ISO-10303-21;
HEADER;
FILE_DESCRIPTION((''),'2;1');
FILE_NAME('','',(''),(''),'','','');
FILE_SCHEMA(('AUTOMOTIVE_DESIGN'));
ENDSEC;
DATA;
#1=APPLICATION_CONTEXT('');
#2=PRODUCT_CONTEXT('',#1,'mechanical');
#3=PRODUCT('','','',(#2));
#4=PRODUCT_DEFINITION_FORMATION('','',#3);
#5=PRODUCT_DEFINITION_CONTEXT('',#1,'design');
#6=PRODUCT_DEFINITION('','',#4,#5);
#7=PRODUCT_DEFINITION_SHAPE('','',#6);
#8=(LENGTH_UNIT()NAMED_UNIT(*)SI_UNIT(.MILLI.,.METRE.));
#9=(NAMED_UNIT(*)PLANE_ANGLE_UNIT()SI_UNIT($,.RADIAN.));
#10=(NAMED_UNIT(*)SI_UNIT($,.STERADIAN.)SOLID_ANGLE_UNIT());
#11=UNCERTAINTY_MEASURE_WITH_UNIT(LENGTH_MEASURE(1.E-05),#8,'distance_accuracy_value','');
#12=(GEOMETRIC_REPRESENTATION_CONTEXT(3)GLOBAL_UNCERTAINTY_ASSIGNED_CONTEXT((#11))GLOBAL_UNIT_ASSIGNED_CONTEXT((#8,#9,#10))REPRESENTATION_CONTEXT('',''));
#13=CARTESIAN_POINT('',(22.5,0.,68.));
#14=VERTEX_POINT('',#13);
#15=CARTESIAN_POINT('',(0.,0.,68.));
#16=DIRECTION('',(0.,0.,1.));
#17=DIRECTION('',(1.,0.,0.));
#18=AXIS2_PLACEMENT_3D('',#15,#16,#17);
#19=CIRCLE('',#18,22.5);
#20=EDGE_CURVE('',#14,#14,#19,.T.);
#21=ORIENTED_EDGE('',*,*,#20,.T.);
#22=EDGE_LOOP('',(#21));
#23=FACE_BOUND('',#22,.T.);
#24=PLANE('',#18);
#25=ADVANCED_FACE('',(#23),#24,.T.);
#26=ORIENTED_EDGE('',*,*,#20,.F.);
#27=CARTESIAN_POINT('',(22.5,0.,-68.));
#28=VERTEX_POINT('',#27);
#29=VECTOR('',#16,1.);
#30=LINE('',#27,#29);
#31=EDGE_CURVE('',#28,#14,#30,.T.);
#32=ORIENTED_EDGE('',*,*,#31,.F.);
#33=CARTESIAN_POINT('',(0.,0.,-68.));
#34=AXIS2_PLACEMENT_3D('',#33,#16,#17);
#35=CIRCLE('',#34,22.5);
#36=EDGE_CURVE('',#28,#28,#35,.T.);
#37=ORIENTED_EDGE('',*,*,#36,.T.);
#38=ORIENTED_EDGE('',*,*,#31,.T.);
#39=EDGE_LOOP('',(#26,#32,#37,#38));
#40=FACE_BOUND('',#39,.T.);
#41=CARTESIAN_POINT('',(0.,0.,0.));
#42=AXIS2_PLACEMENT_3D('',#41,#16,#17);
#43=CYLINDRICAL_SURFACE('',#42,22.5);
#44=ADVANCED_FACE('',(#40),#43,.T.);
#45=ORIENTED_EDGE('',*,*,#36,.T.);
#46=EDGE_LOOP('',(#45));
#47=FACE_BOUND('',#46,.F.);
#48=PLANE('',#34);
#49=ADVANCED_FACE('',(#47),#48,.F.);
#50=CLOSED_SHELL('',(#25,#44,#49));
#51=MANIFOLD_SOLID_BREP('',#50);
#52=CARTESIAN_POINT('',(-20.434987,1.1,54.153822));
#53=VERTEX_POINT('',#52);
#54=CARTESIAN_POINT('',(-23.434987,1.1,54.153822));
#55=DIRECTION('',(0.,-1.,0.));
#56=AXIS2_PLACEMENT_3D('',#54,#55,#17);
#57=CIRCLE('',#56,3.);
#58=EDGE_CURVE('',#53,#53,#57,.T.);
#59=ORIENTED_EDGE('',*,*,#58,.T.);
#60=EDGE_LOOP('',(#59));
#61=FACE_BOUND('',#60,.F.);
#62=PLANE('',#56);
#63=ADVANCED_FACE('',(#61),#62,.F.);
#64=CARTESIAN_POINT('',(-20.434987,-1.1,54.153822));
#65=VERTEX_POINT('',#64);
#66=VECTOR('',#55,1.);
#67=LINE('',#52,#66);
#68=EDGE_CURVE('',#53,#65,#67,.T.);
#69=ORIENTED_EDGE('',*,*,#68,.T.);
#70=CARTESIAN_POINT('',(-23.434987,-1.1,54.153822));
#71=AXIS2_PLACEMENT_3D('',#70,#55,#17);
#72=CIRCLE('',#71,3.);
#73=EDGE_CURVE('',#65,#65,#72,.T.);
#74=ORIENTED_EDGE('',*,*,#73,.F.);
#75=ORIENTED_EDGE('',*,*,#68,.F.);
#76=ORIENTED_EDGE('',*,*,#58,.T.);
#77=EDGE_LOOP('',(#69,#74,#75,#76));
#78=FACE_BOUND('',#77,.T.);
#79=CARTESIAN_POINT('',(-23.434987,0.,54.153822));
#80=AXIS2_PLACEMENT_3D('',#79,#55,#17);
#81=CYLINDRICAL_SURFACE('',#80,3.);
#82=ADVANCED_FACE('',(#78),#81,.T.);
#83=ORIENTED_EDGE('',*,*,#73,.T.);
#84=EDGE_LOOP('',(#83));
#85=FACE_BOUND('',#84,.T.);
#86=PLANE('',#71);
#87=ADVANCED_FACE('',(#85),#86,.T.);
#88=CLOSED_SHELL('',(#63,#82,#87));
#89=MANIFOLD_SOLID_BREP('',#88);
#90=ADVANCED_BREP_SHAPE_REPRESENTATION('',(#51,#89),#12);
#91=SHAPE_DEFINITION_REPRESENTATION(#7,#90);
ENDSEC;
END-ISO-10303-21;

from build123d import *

# Parameters (mm, degrees)
F0_R     = 22.5
F1_DEPTH = 68
F2_R     = 3
F3_DEPTH = 1.1


# Not quite as in the source:
# - the program builds the solid bodies; features that only make, move or delete a surface that nothing else refers to are left out


with BuildPart() as f1:
    # F0 (on Top) → F1 (new body, symmetric)
    with BuildSketch(Plane.XY):
        Circle(F0_R)
    extrude(amount=F1_DEPTH, both=True)


with BuildPart() as f3:
    # F2 (on Front) → F3 (new body, symmetric)
    with BuildSketch(Plane.XZ):
        with Locations((-23.4349872917, 54.1538223624)):
            Circle(F2_R)
    extrude(amount=F3_DEPTH, both=True)


solid = Compound([f1.part, f3.part])
